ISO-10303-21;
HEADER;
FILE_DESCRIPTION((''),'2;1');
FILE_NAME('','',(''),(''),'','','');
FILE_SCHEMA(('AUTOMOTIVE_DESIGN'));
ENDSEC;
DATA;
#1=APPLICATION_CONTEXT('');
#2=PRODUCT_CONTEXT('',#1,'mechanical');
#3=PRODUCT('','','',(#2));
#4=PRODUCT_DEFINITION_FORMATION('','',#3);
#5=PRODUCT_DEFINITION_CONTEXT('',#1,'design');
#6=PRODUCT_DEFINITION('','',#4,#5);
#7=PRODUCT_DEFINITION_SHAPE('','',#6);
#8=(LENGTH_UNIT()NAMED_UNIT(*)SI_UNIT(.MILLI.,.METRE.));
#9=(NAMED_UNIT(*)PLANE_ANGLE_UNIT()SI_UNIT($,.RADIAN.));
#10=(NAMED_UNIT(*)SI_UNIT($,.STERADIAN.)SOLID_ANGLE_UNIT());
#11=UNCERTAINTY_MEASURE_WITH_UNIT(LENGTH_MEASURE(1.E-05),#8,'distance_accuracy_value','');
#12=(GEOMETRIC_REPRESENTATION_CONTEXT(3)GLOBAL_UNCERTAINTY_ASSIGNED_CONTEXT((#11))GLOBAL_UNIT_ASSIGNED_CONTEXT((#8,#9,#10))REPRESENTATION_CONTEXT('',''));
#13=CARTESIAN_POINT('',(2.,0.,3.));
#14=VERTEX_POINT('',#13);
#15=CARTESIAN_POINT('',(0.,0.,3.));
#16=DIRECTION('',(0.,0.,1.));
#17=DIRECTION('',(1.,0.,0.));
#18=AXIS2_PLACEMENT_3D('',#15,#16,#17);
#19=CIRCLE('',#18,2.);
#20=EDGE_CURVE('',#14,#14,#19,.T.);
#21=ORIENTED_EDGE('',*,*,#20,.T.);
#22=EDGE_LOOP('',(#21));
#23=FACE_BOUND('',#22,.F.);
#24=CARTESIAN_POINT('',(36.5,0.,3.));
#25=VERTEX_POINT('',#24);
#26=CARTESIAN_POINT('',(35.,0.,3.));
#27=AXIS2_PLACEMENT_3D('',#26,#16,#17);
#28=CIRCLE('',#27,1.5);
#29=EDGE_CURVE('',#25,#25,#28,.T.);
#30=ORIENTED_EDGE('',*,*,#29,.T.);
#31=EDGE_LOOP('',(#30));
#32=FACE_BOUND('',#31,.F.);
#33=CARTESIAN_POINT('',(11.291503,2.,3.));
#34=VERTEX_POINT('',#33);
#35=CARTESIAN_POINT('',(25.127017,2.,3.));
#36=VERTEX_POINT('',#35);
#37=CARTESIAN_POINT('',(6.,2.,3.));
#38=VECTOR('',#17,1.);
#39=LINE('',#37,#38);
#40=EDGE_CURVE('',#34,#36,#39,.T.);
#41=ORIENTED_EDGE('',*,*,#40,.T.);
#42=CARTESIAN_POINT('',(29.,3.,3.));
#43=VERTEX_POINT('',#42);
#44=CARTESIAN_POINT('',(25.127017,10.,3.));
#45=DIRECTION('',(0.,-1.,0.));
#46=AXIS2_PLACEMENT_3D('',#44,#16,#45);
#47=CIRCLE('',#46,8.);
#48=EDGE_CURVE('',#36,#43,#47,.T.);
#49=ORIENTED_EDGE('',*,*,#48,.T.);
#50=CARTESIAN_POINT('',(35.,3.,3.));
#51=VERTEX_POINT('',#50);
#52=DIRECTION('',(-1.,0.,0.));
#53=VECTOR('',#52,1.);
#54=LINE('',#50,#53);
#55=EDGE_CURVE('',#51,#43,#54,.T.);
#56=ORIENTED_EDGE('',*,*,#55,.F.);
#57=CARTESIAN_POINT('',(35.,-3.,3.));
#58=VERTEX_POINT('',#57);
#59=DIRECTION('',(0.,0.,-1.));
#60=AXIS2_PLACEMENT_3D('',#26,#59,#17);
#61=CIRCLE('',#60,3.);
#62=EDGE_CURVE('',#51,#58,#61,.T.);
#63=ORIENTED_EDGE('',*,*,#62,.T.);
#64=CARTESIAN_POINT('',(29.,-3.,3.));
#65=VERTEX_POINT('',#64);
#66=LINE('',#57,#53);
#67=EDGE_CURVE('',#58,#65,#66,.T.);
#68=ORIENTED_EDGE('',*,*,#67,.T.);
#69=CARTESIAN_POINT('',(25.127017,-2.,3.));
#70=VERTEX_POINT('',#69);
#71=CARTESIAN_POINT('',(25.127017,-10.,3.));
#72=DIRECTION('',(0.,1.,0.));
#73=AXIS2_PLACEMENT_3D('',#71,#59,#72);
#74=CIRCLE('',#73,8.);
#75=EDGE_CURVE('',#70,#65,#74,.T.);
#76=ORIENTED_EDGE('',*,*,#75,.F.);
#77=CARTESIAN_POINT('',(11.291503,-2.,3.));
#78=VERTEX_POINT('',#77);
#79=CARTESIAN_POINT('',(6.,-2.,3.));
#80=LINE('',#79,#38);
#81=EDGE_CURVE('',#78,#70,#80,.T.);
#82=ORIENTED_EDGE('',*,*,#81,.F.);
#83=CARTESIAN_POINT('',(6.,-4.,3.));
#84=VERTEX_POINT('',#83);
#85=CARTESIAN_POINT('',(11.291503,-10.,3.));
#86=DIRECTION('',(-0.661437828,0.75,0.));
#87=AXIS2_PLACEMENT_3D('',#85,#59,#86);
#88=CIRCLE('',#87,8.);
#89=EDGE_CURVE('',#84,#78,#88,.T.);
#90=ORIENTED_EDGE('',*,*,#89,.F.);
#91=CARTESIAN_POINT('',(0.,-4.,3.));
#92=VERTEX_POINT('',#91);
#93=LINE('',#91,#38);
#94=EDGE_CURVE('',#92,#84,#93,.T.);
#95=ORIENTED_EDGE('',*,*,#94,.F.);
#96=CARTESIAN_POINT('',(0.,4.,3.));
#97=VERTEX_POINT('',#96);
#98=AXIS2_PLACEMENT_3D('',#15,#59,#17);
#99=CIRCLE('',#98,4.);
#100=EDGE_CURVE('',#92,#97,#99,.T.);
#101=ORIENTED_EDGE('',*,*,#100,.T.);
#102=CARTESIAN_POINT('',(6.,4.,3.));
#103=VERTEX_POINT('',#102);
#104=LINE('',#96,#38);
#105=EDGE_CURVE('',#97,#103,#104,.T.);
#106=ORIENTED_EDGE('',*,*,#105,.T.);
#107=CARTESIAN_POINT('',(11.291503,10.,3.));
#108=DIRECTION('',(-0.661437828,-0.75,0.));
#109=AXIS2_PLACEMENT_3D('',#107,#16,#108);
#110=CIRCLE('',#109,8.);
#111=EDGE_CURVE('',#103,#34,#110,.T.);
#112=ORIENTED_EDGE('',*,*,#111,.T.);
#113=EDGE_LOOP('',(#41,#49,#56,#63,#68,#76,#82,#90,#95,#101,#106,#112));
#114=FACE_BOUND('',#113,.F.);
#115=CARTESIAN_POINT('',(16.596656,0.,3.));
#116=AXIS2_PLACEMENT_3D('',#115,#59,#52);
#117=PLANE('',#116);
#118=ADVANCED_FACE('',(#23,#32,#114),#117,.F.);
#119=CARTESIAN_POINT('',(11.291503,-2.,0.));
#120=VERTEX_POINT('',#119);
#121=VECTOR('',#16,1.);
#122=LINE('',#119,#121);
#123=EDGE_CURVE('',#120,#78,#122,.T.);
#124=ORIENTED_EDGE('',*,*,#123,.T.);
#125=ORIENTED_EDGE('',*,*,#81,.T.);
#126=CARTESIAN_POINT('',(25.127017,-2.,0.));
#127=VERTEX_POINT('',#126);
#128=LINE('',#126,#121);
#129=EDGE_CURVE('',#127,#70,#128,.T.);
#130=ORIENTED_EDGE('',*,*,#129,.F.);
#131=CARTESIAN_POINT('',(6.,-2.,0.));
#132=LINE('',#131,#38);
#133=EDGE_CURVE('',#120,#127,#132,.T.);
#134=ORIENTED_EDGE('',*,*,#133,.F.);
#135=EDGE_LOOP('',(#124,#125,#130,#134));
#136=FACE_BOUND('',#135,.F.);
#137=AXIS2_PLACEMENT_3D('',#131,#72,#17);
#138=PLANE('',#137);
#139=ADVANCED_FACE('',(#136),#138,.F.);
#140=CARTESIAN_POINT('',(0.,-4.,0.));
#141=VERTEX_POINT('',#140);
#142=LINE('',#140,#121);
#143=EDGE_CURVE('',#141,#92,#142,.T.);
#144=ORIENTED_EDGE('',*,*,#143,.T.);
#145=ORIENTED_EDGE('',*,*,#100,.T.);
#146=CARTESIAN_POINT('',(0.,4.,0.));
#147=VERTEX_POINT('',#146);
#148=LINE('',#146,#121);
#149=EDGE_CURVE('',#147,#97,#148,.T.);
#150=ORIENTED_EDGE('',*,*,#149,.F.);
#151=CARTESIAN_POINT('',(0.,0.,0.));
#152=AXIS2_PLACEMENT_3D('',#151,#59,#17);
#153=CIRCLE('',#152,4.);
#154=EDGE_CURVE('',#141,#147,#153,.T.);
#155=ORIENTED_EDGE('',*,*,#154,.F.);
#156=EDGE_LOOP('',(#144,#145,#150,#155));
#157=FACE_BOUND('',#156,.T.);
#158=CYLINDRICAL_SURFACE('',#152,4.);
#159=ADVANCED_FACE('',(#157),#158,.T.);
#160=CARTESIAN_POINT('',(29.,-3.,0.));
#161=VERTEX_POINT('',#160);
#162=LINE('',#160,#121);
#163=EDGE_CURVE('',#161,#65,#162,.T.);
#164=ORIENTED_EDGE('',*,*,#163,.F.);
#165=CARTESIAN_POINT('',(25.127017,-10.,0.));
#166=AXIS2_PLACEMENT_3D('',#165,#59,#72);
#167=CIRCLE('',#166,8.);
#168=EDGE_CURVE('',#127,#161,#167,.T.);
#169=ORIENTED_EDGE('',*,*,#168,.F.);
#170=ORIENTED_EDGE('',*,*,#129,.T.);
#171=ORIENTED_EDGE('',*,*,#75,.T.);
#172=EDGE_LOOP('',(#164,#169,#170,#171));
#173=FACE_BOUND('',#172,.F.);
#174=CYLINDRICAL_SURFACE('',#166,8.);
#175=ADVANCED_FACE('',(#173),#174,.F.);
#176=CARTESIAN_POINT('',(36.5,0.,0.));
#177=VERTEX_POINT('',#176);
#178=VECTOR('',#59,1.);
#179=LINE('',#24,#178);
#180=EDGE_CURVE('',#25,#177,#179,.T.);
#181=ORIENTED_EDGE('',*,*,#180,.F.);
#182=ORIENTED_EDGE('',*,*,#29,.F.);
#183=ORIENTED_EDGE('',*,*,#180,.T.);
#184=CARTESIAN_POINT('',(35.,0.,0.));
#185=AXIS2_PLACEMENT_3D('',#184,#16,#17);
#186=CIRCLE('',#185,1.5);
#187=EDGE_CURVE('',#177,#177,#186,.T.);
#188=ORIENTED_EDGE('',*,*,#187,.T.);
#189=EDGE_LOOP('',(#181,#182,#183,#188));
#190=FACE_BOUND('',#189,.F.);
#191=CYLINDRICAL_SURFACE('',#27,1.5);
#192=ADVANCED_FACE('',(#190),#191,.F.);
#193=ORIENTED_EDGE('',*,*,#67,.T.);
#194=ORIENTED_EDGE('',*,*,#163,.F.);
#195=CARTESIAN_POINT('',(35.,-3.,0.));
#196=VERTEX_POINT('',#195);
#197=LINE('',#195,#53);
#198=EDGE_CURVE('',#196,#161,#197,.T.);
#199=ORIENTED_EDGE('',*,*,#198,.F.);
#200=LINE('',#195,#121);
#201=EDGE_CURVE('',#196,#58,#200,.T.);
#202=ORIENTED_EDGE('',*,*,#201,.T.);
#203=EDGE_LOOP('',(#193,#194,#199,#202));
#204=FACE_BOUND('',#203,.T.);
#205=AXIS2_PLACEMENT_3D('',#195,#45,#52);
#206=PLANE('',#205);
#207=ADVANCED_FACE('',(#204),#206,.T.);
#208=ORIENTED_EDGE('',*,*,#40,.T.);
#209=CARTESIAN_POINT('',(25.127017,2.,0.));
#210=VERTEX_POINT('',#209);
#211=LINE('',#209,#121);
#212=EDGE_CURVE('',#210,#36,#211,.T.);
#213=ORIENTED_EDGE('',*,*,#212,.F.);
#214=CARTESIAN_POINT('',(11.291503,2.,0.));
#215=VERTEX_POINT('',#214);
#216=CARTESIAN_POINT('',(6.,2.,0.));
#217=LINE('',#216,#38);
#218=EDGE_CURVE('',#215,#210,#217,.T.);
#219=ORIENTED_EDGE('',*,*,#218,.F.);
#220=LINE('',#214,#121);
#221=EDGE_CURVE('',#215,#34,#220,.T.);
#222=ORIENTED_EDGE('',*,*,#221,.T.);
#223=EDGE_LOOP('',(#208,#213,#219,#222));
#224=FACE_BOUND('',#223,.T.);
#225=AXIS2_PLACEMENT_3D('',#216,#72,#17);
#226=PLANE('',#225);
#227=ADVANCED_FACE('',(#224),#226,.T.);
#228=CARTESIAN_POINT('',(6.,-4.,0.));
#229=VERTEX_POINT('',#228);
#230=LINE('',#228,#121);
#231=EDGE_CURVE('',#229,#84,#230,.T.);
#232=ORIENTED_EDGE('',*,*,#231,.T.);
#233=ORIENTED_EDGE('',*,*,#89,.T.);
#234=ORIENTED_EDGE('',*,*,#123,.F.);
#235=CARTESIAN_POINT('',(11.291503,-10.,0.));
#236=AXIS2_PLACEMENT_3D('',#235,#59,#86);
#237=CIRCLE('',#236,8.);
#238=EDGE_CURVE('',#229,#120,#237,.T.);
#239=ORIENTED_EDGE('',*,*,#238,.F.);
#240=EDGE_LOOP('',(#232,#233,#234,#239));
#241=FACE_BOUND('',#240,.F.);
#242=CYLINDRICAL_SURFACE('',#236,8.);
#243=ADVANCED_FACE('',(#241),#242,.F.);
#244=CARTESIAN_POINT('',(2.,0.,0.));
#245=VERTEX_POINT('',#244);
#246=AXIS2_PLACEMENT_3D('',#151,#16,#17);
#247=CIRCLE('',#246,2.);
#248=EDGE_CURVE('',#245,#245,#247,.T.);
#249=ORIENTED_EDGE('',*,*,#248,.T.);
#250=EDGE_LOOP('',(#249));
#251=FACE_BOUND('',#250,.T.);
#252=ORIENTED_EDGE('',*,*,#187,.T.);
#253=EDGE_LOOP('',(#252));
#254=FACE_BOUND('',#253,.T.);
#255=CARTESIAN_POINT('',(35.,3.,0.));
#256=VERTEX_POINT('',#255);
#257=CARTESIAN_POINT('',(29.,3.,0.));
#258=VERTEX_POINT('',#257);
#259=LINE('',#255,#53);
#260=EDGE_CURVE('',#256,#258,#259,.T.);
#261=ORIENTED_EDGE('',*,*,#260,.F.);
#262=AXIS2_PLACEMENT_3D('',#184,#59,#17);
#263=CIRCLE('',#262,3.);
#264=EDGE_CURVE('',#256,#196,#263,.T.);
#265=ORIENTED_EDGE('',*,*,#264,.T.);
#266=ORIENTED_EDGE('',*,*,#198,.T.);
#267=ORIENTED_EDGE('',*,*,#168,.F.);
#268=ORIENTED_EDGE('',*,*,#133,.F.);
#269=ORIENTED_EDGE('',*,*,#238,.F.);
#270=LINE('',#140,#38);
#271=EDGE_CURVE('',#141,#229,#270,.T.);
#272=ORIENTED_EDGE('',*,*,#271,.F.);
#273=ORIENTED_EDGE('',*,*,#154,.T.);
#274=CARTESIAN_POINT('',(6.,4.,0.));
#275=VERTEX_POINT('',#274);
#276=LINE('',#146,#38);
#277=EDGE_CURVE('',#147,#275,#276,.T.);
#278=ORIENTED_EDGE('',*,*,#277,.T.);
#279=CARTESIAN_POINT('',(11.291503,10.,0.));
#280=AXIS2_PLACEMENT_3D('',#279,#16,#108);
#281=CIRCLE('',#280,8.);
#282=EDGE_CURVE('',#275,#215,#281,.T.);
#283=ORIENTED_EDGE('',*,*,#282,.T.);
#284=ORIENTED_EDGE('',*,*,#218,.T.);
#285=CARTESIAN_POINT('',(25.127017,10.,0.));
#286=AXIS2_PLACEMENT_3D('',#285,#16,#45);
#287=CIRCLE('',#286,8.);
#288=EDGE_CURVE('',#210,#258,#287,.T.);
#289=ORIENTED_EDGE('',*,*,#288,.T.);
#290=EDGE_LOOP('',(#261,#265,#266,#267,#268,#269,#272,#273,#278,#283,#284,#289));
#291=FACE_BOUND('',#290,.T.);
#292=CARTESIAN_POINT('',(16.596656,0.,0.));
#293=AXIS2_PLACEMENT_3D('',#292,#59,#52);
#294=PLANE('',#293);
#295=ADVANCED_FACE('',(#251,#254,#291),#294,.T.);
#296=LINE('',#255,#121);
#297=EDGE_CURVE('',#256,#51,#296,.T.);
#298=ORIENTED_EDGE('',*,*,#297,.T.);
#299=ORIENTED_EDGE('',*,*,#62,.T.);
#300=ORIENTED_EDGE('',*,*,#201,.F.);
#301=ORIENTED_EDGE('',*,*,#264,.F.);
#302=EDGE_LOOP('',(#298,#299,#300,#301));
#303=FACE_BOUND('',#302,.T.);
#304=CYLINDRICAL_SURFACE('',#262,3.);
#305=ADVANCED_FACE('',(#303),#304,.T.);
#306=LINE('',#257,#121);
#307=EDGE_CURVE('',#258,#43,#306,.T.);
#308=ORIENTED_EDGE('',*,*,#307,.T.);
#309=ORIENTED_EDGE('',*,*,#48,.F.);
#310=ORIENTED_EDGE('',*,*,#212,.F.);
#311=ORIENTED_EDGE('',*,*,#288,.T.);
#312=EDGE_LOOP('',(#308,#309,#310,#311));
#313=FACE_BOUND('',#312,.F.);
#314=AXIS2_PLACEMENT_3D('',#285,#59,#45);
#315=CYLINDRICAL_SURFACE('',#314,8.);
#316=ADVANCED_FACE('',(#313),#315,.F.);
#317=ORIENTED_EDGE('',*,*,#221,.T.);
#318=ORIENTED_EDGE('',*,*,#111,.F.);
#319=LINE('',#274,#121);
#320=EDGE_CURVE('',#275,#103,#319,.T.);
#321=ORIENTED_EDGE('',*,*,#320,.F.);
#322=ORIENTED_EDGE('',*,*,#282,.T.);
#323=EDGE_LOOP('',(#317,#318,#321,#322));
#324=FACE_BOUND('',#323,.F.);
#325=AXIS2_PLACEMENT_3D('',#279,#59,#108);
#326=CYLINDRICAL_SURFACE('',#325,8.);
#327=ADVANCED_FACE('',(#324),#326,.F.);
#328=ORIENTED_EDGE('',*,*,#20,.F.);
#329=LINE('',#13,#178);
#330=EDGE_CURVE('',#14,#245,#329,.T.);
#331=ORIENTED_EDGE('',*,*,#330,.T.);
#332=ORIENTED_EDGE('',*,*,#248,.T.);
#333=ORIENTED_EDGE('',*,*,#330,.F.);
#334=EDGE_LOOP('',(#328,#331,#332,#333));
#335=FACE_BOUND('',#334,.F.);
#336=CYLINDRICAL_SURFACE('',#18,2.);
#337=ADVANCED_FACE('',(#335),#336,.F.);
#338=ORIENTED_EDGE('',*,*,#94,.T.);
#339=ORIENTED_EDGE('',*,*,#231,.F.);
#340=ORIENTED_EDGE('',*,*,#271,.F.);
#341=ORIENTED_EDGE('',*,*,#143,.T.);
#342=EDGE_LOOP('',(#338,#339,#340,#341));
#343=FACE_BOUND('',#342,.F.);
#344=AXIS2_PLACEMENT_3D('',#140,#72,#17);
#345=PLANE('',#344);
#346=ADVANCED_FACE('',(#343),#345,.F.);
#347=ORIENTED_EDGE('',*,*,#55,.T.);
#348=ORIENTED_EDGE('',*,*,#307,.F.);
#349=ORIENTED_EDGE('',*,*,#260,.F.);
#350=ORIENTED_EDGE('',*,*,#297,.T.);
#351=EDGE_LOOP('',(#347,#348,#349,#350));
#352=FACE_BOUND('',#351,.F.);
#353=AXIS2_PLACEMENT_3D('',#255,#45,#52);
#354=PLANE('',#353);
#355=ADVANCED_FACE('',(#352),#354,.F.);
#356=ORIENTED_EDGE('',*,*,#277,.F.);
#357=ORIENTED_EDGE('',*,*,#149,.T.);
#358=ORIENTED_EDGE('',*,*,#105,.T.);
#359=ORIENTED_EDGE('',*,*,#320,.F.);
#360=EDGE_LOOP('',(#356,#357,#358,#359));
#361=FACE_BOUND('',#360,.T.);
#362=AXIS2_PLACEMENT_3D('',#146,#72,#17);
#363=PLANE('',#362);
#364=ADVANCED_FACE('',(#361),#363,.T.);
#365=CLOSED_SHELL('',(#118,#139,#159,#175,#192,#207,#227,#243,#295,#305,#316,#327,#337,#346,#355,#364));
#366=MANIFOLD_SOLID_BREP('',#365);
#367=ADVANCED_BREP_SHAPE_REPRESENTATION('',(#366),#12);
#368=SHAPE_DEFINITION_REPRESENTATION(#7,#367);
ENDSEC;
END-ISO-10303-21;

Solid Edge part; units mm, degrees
sketch "Sketch1" plane through (0, 0, 0) normal (0, 0, 1) x (1, 0, 0)
  arc A0 (0, -4) -> (0, 4) centre (0, 0) cw
  line L0 (0, 4) -> (6, 4)
  line L1 (6, 4) -> (6, 2)
  line L2 (6, 2) -> (29, 2)
  line L3 (29, 2) -> (29, 3)
  line L4 (35, 3) -> (29, 3)
  arc A1 (35, 3) -> (35, -3) centre (35, 0) cw
  line L5 (35, -3) -> (29, -3)
  line L6 (29, -2) -> (29, -3)
  line L7 (6, -2) -> (29, -2)
  line L8 (6, -4) -> (6, -2)
  line L9 (0, -4) -> (6, -4)
extrude "Protrusion1" add sketch "Sketch1" along normal blind 3
sketch "Sketch2" plane through (17, 0, 3) normal (0, 0, 1) x (1, 0, 0)
  circle A0 centre (-17, 0) radius 2
  circle A1 centre (18, 0) radius 1.5
extrude "Cutout1" cut sketch "Sketch2" against normal through all
fillet "Rounding" radius 8 4 edges at (6, -2, 1.5) (6, 2, 1.5) (29, 2, 1.5) (29, -2, 1.5)
